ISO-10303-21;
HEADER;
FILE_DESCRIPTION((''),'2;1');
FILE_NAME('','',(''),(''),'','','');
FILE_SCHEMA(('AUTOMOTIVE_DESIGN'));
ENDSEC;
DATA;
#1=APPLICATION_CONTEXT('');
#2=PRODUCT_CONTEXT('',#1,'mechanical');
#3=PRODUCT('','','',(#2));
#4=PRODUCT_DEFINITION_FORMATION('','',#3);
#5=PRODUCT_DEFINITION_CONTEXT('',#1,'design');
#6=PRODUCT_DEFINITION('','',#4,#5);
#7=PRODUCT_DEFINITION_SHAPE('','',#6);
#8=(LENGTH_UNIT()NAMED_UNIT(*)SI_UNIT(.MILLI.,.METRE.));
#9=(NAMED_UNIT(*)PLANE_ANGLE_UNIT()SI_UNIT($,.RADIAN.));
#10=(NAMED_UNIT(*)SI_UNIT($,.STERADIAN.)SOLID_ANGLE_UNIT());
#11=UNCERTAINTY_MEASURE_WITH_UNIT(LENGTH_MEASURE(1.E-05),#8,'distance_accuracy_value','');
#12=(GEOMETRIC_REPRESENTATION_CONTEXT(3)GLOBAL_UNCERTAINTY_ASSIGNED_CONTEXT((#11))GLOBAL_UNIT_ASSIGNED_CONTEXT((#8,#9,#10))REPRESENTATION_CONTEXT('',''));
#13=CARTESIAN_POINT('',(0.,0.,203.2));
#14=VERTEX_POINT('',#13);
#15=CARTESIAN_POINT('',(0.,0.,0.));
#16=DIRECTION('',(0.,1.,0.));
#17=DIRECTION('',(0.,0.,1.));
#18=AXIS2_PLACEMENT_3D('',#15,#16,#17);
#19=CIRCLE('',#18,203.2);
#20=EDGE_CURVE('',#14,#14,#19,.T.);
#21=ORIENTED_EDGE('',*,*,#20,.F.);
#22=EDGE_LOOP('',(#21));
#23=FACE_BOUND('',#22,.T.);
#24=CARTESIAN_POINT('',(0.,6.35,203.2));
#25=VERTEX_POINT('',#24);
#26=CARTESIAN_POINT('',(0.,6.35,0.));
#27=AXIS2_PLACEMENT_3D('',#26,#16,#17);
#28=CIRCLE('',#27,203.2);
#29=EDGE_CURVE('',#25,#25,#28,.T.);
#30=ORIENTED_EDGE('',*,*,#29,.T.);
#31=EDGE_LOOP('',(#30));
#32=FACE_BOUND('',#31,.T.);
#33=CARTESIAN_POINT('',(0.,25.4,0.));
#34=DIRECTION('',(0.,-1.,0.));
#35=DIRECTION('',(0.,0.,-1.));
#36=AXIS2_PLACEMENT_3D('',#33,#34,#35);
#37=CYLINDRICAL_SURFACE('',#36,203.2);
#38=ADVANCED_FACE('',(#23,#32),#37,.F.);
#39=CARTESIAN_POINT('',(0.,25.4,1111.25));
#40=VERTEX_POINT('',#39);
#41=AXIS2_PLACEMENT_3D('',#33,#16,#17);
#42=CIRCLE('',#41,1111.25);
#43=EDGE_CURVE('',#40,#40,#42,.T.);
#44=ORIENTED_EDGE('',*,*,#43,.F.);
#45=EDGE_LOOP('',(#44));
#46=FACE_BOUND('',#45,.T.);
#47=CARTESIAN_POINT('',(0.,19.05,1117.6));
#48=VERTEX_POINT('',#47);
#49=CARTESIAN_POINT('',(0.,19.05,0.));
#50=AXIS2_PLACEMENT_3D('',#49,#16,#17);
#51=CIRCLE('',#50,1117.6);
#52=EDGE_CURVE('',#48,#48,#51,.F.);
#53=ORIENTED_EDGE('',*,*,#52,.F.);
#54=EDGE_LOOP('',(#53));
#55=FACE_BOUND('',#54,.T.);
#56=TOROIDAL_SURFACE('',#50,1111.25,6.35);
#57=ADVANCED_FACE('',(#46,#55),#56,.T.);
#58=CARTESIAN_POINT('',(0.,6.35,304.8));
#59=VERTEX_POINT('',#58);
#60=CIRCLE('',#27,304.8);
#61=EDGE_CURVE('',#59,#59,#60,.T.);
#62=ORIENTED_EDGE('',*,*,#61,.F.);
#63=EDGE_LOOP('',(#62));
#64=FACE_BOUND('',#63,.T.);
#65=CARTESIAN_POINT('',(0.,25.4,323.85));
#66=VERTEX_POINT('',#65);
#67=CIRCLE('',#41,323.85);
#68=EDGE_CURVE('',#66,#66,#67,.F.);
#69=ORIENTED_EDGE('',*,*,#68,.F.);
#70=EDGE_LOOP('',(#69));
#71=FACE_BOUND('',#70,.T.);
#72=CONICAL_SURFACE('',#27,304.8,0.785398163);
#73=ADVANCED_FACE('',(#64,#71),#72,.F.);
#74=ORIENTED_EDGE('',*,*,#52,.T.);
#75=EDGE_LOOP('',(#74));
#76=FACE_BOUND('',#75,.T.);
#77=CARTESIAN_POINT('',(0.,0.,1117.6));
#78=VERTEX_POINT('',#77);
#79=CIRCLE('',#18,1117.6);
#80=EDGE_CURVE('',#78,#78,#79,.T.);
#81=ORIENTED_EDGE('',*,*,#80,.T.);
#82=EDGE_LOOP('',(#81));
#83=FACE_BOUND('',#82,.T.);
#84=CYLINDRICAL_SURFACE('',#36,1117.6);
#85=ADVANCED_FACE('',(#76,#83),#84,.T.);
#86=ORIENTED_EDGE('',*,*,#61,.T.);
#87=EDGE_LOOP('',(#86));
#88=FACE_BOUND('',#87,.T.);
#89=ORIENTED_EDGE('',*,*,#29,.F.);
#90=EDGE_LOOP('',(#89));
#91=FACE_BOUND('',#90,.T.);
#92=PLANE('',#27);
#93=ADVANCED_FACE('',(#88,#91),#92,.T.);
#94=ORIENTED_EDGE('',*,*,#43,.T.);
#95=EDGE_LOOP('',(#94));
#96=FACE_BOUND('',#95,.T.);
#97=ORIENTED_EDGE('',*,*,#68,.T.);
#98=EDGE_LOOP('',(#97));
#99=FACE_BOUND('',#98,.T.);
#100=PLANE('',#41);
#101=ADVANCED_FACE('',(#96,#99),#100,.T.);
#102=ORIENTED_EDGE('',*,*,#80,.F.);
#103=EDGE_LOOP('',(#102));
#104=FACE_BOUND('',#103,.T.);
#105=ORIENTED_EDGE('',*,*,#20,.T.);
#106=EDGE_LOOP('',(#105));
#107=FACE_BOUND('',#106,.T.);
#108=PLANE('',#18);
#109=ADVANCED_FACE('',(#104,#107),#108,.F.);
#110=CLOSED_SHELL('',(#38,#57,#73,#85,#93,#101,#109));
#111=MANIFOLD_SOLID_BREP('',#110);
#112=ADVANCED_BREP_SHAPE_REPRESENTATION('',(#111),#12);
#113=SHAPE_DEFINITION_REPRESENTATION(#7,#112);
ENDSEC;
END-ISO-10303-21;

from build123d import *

# Parameters (mm, degrees)
SKETCH1_R           = 1117.6
SKETCH1_R_2         = 203.2
BOSS_EXTRUDE1_DEPTH = 25.4
SKETCH2_R           = 304.8
CUT_EXTRUDE1_DEPTH  = 19.05
CHAMFER1_SIZE       = 19.05
FILLET1_R           = 6.35


with BuildPart() as part:
    # Sketch1 → Boss-Extrude1 (new body)
    with BuildSketch(Plane(origin=(0, 0, 0), x_dir=(1, 0, 0), z_dir=(0, 1, 0))):
        with Locations(Location((0, 0, 0), (0, 0, 270))):
            Circle(SKETCH1_R)
        with Locations(Location((0, 0, 0), (0, 0, 270))):
            Circle(SKETCH1_R_2, mode=Mode.SUBTRACT)
    extrude(amount=BOSS_EXTRUDE1_DEPTH)

    # Sketch2 → Cut-Extrude1 (cut)
    with BuildSketch(Plane(origin=(0, 25.4, 0), x_dir=(1, 0, 0), z_dir=(0, 1, 0))):
        with Locations(Location((0, 0, 0), (0, 0, 270))):
            Circle(SKETCH2_R)
    extrude(amount=-CUT_EXTRUDE1_DEPTH, mode=Mode.SUBTRACT)

    # Chamfer1
    chamfer1_edges = [part.edges().sort_by_distance(p)[0] for p in [
        (0, 25.4, -304.8),
    ]]
    chamfer(chamfer1_edges, length=CHAMFER1_SIZE - 0.0001)  # a hair under: the kernel refuses the full size

    # Fillet1
    fillet1_edges = [part.edges().sort_by_distance(p)[0] for p in [
        (0, 25.4, -1117.6),
    ]]
    fillet(fillet1_edges, radius=FILLET1_R)


solid = part.part
